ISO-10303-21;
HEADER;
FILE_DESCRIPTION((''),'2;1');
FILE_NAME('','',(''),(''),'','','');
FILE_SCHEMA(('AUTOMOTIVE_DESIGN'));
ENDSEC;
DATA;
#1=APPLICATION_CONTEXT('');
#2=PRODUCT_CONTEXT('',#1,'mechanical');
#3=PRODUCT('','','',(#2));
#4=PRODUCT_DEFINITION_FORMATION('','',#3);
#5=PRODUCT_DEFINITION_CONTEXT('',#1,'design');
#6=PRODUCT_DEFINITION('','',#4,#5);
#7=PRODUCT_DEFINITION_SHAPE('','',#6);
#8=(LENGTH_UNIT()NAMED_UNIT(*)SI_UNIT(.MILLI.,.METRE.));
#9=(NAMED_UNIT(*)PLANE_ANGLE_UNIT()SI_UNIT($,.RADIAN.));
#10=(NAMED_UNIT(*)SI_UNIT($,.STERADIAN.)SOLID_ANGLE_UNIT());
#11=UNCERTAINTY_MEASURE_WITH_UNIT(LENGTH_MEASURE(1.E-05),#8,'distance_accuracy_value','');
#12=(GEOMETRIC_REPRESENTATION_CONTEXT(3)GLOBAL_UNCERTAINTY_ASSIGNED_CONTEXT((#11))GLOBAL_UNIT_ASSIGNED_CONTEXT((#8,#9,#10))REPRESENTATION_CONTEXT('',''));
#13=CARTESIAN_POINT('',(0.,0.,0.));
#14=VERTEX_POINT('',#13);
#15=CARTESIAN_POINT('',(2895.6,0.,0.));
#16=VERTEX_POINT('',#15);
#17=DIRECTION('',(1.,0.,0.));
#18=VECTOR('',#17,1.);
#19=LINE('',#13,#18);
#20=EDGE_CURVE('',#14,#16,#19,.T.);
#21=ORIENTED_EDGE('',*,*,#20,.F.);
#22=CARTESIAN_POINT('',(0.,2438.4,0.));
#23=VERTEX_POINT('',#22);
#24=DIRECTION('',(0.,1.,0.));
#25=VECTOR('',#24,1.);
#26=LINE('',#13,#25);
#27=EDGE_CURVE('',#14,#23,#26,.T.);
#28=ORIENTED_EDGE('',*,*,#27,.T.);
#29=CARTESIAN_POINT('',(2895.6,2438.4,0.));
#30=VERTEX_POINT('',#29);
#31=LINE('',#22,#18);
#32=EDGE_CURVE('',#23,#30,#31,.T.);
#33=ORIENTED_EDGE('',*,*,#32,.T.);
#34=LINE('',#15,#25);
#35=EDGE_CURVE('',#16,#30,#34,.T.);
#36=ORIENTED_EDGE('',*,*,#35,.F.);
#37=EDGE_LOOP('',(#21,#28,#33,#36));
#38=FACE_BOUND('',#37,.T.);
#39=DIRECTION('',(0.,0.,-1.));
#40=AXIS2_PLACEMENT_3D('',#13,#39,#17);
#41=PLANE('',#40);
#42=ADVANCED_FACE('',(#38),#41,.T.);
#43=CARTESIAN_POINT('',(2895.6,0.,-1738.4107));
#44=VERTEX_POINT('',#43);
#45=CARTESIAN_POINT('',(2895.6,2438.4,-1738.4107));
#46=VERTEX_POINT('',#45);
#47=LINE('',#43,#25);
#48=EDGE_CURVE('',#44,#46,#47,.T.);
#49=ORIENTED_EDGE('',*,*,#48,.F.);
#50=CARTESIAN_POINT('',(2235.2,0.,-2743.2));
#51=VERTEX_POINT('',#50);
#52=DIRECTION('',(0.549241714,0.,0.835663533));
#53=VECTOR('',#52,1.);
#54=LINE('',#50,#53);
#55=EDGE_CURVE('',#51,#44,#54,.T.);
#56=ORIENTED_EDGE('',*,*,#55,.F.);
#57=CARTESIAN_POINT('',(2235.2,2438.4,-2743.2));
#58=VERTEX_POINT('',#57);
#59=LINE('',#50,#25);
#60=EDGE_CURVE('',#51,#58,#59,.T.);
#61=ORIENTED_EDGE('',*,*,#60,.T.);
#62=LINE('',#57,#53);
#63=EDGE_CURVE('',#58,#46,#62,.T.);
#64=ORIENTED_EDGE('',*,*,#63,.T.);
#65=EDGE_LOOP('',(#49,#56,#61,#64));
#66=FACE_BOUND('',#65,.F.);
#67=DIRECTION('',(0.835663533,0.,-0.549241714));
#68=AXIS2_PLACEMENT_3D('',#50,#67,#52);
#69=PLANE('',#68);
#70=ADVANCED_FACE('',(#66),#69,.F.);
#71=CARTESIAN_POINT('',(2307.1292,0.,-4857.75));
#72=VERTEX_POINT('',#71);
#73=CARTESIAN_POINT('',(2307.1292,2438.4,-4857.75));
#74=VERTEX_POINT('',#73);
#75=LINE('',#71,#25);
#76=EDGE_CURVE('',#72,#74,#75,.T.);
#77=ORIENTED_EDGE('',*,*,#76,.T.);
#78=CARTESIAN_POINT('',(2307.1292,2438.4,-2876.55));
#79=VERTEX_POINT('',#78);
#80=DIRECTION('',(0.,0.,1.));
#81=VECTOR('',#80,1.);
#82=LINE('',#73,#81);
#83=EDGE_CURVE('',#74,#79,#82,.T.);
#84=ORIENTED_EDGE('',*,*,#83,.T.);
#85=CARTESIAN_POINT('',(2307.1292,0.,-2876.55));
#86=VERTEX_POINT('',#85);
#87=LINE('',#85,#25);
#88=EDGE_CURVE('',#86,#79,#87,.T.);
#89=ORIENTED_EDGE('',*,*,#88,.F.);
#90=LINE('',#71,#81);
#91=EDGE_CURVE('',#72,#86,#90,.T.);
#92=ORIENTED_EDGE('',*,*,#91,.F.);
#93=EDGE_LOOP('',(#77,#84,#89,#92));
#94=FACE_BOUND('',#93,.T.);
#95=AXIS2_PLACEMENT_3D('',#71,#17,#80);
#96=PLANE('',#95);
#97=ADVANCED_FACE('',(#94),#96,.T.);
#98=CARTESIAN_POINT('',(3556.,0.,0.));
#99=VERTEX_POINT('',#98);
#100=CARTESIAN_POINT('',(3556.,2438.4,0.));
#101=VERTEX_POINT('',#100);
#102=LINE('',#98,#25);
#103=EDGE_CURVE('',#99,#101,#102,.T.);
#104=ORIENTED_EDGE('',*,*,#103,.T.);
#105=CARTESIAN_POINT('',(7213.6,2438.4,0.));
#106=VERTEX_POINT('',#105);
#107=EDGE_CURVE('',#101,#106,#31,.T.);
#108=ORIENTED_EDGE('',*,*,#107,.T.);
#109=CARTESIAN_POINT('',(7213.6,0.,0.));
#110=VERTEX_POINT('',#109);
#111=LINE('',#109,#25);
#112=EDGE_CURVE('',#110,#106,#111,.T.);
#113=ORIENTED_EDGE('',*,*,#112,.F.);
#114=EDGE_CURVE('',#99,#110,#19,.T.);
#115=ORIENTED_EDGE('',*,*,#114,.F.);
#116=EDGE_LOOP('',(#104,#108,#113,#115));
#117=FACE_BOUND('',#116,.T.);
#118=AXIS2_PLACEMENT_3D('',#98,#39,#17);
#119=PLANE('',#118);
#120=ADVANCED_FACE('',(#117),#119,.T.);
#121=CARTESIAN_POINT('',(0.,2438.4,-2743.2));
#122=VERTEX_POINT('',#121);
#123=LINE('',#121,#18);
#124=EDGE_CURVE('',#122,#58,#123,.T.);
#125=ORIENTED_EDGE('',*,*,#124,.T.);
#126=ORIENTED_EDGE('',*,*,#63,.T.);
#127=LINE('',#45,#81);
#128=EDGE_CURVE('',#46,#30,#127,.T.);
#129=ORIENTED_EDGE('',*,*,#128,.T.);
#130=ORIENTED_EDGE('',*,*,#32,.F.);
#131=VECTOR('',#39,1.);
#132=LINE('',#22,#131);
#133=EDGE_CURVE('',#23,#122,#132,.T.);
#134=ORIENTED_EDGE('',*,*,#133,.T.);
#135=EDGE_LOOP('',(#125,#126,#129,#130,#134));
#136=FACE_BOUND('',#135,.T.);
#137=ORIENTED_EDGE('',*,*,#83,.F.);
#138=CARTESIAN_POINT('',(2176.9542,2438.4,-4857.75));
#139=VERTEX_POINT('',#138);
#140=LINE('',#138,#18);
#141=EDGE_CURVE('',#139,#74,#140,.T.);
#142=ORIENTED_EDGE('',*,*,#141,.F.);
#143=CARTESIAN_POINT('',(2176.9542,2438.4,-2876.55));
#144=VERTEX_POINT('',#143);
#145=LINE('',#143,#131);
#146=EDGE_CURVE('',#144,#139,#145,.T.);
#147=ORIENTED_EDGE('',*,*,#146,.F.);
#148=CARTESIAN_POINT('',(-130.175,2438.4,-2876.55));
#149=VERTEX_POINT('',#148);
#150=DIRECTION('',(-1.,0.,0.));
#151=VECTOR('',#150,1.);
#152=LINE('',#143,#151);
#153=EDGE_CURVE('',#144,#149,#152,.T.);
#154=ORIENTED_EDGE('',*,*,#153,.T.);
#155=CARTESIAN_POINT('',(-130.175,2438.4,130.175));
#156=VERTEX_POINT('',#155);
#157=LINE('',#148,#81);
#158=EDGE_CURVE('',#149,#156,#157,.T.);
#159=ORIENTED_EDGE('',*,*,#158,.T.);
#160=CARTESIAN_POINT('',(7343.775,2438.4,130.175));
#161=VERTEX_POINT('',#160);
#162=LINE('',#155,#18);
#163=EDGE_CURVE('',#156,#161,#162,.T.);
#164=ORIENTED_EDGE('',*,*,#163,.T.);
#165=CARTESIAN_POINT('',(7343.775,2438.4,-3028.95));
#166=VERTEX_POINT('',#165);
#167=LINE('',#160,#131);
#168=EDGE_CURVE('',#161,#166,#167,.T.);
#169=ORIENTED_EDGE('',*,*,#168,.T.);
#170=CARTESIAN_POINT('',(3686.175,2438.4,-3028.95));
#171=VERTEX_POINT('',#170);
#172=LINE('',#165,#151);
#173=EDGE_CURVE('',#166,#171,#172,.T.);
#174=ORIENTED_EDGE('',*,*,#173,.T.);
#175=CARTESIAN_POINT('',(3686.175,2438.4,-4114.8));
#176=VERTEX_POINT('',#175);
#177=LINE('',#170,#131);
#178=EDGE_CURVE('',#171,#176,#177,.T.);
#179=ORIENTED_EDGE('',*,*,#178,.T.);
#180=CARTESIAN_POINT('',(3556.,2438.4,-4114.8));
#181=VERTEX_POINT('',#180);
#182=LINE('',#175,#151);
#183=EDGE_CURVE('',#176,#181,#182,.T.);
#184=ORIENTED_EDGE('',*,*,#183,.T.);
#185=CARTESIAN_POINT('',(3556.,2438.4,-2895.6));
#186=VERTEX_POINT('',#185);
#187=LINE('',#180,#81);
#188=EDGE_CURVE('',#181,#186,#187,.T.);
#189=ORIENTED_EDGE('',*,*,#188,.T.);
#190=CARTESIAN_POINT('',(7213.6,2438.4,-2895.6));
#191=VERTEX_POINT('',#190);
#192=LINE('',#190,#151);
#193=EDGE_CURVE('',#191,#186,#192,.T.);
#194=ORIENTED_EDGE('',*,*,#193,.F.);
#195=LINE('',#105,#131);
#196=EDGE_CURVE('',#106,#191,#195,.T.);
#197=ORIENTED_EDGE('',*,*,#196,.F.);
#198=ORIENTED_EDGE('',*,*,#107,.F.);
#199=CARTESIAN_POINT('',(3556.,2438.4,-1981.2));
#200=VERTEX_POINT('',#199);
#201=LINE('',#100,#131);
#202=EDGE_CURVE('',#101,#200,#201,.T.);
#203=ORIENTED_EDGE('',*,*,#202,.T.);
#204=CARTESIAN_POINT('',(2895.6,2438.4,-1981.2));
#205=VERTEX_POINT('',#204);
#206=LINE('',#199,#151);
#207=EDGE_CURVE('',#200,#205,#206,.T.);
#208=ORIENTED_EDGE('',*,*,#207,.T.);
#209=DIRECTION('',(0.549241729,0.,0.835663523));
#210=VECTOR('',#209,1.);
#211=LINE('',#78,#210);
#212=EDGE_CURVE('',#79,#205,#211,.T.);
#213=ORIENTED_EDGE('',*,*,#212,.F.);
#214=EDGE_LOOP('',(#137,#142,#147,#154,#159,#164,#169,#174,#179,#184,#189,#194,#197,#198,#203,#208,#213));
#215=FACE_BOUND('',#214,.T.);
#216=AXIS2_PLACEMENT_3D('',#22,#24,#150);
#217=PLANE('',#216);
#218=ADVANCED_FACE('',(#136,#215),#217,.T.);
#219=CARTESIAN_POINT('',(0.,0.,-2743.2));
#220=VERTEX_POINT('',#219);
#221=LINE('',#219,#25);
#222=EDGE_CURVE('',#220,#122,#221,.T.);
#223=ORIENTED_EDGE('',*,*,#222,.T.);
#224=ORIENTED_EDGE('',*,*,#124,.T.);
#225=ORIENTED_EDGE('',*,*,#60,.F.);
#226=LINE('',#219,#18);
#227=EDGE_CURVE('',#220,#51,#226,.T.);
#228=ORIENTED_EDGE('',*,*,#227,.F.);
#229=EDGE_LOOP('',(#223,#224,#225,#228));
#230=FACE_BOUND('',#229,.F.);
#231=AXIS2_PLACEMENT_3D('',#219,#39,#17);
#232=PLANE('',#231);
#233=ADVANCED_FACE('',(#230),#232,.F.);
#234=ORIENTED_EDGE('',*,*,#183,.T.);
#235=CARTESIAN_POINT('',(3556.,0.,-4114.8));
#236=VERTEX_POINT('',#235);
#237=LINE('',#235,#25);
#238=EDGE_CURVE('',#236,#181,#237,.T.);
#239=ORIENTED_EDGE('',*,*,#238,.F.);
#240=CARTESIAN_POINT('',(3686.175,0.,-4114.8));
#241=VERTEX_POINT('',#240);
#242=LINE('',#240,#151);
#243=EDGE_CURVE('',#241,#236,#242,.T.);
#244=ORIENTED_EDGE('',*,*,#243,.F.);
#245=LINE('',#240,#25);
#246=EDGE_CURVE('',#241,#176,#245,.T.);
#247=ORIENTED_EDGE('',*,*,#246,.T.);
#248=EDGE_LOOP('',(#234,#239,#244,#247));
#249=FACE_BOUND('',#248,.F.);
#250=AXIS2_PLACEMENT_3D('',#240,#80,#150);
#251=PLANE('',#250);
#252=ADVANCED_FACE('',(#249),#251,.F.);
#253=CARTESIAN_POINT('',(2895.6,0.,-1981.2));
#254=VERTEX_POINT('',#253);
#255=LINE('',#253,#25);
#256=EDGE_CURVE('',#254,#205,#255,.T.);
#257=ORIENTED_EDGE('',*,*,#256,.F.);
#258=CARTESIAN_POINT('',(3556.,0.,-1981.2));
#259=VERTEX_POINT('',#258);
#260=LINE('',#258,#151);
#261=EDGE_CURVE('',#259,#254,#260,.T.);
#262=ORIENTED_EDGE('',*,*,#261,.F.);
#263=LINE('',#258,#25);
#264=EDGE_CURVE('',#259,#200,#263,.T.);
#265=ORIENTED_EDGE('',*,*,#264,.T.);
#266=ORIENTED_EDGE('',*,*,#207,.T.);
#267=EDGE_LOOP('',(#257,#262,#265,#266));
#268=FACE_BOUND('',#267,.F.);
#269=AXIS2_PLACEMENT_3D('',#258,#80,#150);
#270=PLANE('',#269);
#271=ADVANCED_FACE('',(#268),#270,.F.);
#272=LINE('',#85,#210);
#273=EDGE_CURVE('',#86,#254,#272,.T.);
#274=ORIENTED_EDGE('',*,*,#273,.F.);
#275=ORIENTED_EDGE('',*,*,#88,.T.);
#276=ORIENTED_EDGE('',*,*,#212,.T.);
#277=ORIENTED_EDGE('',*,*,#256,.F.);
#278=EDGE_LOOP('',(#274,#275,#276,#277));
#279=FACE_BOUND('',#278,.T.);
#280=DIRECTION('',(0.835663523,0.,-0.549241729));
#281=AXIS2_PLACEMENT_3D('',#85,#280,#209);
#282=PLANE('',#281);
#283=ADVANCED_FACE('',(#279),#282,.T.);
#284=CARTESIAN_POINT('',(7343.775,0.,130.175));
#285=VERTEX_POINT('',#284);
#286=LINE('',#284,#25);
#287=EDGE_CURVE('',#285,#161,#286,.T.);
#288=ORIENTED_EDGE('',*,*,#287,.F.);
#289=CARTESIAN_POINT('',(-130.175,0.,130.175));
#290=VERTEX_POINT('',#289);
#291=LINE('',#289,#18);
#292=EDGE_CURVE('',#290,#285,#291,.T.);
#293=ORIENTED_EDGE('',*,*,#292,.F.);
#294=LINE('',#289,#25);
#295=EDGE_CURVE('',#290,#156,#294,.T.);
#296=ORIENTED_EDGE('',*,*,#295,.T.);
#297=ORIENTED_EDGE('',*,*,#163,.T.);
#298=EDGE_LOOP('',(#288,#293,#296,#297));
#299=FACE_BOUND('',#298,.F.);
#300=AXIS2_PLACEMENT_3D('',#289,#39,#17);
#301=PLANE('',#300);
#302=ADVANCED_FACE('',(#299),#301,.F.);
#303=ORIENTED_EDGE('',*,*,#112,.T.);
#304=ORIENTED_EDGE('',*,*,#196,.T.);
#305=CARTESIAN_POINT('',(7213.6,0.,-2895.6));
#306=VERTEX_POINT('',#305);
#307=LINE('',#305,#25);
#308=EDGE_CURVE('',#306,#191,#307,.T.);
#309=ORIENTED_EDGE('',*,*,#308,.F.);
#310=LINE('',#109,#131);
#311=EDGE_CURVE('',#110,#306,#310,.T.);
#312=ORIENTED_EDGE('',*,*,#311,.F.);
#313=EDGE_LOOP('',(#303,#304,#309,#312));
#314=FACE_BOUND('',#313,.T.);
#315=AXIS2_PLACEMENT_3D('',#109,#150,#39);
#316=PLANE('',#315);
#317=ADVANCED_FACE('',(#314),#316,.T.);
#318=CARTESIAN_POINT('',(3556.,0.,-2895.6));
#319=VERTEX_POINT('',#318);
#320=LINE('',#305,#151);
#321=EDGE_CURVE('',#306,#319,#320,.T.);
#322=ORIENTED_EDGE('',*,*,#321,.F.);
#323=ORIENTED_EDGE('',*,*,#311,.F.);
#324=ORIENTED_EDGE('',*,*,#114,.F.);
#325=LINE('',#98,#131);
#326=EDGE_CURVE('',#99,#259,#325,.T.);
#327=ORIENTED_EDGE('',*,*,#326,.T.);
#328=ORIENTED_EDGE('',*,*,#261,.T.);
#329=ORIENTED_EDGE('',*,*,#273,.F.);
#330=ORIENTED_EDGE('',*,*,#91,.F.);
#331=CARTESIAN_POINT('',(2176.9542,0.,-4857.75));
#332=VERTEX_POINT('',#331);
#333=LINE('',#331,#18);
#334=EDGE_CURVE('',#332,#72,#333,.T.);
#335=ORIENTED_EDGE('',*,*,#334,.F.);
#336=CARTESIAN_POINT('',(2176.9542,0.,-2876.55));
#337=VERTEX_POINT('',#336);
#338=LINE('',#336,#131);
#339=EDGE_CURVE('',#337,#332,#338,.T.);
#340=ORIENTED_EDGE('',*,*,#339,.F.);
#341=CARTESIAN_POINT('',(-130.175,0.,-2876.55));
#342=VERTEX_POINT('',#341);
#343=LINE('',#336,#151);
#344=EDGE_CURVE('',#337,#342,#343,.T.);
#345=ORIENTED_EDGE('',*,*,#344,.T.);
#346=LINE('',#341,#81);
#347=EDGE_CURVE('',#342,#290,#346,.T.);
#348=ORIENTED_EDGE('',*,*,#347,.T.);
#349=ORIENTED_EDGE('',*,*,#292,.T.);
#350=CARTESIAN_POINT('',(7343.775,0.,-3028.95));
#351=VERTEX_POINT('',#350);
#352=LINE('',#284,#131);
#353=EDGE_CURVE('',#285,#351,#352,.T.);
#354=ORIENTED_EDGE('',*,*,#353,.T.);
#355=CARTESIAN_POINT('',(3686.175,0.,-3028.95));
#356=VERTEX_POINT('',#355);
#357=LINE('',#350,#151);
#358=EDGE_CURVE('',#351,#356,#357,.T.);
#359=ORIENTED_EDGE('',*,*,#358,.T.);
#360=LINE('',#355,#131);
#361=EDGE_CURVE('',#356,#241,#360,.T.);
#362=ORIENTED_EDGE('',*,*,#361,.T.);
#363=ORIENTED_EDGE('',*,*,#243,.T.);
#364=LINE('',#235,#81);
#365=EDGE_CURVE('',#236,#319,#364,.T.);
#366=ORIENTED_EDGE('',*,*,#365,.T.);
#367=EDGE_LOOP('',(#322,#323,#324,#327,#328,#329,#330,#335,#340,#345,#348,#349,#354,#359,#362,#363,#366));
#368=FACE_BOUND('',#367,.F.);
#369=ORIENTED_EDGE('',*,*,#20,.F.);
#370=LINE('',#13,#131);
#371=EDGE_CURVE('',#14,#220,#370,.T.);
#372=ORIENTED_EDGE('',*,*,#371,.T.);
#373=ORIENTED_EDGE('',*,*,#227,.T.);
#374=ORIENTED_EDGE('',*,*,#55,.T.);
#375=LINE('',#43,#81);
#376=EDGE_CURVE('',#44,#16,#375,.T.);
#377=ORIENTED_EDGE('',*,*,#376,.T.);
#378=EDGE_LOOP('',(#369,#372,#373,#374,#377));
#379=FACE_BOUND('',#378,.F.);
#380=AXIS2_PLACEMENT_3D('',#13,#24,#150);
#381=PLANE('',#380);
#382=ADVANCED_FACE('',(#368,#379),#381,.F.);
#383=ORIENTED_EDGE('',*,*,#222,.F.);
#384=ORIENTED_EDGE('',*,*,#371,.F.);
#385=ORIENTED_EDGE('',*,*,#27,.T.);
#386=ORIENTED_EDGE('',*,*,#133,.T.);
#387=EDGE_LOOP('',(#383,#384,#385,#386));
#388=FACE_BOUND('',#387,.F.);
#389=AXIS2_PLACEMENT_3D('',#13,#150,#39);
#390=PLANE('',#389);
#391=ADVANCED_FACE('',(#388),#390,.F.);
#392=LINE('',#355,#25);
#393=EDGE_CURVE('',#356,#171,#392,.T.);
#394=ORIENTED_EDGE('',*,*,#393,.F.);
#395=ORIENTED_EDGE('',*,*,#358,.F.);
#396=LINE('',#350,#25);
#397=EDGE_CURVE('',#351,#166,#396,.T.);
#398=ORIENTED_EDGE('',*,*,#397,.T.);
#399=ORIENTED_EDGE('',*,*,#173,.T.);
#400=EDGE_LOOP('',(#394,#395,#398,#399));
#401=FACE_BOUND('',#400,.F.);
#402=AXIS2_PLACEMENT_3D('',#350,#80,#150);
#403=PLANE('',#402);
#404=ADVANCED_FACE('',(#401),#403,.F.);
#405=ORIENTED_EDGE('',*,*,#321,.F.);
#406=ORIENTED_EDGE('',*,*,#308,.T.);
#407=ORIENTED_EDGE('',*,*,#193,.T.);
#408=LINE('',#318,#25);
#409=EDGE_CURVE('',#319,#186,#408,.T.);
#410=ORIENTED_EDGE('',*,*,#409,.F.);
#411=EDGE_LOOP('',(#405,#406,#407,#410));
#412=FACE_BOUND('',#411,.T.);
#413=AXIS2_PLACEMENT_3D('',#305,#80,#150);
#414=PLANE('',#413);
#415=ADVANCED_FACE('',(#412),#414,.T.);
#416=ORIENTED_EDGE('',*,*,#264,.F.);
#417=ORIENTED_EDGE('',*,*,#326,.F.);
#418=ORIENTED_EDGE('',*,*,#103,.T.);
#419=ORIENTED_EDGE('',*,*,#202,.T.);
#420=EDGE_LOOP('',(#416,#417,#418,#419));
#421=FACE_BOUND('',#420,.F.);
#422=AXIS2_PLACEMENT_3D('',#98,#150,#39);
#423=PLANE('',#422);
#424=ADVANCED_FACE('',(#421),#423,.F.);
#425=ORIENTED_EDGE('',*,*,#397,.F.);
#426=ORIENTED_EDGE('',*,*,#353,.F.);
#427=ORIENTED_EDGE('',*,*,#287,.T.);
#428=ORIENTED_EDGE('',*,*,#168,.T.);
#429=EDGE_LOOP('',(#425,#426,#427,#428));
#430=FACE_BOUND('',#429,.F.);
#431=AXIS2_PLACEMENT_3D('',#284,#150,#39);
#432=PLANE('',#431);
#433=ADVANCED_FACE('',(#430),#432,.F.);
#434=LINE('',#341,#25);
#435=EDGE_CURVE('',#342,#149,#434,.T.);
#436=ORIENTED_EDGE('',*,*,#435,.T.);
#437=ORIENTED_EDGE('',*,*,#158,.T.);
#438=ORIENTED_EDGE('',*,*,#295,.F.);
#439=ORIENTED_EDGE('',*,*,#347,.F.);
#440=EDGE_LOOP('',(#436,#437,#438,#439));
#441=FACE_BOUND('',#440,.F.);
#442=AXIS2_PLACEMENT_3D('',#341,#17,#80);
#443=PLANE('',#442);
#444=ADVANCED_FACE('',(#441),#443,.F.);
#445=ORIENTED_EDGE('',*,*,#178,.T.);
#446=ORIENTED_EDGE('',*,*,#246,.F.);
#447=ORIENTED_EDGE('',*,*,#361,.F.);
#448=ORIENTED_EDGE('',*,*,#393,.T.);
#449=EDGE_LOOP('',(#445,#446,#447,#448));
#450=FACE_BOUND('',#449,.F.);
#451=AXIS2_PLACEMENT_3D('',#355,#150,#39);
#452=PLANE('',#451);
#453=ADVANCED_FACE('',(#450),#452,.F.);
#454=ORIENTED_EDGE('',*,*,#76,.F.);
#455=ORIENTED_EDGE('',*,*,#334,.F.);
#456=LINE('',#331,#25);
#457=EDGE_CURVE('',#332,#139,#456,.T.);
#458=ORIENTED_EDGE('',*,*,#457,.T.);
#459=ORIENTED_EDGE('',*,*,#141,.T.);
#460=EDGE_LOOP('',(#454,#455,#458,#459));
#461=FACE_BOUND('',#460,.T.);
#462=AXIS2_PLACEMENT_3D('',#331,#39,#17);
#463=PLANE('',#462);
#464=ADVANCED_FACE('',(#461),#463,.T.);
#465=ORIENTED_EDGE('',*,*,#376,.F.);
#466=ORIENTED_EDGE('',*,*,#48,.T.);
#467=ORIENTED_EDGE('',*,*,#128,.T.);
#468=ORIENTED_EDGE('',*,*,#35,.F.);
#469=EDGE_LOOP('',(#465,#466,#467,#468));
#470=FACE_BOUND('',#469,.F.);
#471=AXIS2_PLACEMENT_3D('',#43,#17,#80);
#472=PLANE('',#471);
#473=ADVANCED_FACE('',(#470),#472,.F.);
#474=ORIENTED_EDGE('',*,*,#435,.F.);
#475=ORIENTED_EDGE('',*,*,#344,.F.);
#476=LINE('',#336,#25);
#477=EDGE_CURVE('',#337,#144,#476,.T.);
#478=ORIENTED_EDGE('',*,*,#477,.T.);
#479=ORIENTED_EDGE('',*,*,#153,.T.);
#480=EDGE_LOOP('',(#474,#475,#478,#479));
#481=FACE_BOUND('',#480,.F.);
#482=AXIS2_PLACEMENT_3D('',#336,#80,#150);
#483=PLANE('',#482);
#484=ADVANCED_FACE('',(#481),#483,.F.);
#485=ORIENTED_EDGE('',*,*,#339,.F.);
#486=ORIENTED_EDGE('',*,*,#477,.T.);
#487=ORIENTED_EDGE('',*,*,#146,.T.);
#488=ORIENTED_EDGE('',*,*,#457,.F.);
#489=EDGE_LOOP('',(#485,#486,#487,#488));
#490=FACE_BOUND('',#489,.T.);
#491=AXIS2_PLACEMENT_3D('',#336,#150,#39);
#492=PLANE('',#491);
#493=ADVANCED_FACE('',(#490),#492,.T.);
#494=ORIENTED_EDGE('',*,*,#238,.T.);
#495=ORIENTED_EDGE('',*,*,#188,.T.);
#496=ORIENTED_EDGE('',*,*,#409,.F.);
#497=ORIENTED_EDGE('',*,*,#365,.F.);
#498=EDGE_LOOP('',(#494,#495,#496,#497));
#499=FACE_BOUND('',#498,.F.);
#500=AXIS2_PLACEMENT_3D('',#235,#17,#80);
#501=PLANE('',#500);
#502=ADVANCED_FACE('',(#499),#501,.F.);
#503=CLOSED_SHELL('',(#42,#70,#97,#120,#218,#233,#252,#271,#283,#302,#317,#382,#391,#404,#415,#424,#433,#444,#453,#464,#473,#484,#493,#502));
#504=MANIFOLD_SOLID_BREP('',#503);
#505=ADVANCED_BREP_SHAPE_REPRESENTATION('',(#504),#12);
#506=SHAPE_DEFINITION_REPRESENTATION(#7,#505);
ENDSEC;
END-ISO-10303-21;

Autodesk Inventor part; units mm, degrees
ref_plane "YZ Plane" through (0, 0, 0) normal (1, 0, 0) x (0, 1, 0)
ref_plane "XZ Plane" through (0, 0, 0) normal (0, 1, 0) x (-1, 0, 0)
ref_plane "XY Plane" through (0, 0, 0) normal (0, 0, 1) x (1, 0, 0)
sketch "Sketch1" plane through (0, 0, 0) normal (0, 1, 0) x (-1, 0, 0)
  line L0 (0, 0) -> (0, -2743.2)
  line L1 (0, -2743.2) -> (-2235.2, -2743.2)
  line L2 (0, 0) -> (-7213.6, 0)
  line L3 (-2895.6, 0) -> (-3556, 0)
  line L4 (-3556, 0) -> (-3556, -1981.2)
  line L5 (-3556, -1981.2) -> (-2895.6, -1981.2)
  line L6 (-2895.6, -1738.4107) -> (-2895.6, 0)
  line L7 (-7213.6, 0) -> (-7213.6, -2895.6)
  line L8 (-7213.6, -2895.6) -> (-3556, -2895.6)
  line L9 (-2176.9542, -2876.55) -> (130.175, -2876.55)
  line L10 (130.175, -2876.55) -> (130.175, 130.175)
  line L11 (130.175, 130.175) -> (-7343.775, 130.175)
  line L12 (-7343.775, 130.175) -> (-7343.775, -3028.95)
  line L13 (-7343.775, -3028.95) -> (-3686.175, -3028.95)
  line L14 (-3556, -4114.8) -> (-3556, -2895.6)
  line L15 (-2307.1292, -2876.55) -> (-2895.6, -1981.2)
  line L16 (-2235.2, -2743.2) -> (-2895.6, -1738.4107)
  line L17 (-2176.9542, -2876.55) -> (-2176.9542, -4857.75)
  line L18 (-2176.9542, -4857.75) -> (-2307.1292, -4857.75)
  line L19 (-2307.1292, -4857.75) -> (-2307.1292, -2876.55)
  line L20 (-3686.175, -3028.95) -> (-3686.175, -4114.8)
  line L21 (-3686.175, -4114.8) -> (-3556, -4114.8)
  point P0 (-2601.3646, -2428.875)
  dimension "d1" = 2743.2
  dimension "d3" = 7213.6
  dimension "d4" = 2895.6
  dimension "d5" = 660.4
  dimension "d6" = 1981.2
  dimension "d7" = 914.4
  dimension "d8" = 3657.6
  dimension "d10" = 130.175
  dimension "d11" = 130.175
  dimension "d12" = 130.175
  dimension "d13" = 133.35
  dimension "d16" = 133.35
  dimension "d21" = 1219.2
  dimension "d22" = 130.175
  dimension "d24" = 2235.2
  dimension "d25" = 1981.2
  dimension "d26" = 133.35
  dimension "d27" = 130.175
  dimension "d28" = 58.2458
extrude "Extrusion1" add sketch "Sketch1" along normal blind 2438.4
properties part number "Existing_Kitchen_And_Dining_Room" material "Glass"
